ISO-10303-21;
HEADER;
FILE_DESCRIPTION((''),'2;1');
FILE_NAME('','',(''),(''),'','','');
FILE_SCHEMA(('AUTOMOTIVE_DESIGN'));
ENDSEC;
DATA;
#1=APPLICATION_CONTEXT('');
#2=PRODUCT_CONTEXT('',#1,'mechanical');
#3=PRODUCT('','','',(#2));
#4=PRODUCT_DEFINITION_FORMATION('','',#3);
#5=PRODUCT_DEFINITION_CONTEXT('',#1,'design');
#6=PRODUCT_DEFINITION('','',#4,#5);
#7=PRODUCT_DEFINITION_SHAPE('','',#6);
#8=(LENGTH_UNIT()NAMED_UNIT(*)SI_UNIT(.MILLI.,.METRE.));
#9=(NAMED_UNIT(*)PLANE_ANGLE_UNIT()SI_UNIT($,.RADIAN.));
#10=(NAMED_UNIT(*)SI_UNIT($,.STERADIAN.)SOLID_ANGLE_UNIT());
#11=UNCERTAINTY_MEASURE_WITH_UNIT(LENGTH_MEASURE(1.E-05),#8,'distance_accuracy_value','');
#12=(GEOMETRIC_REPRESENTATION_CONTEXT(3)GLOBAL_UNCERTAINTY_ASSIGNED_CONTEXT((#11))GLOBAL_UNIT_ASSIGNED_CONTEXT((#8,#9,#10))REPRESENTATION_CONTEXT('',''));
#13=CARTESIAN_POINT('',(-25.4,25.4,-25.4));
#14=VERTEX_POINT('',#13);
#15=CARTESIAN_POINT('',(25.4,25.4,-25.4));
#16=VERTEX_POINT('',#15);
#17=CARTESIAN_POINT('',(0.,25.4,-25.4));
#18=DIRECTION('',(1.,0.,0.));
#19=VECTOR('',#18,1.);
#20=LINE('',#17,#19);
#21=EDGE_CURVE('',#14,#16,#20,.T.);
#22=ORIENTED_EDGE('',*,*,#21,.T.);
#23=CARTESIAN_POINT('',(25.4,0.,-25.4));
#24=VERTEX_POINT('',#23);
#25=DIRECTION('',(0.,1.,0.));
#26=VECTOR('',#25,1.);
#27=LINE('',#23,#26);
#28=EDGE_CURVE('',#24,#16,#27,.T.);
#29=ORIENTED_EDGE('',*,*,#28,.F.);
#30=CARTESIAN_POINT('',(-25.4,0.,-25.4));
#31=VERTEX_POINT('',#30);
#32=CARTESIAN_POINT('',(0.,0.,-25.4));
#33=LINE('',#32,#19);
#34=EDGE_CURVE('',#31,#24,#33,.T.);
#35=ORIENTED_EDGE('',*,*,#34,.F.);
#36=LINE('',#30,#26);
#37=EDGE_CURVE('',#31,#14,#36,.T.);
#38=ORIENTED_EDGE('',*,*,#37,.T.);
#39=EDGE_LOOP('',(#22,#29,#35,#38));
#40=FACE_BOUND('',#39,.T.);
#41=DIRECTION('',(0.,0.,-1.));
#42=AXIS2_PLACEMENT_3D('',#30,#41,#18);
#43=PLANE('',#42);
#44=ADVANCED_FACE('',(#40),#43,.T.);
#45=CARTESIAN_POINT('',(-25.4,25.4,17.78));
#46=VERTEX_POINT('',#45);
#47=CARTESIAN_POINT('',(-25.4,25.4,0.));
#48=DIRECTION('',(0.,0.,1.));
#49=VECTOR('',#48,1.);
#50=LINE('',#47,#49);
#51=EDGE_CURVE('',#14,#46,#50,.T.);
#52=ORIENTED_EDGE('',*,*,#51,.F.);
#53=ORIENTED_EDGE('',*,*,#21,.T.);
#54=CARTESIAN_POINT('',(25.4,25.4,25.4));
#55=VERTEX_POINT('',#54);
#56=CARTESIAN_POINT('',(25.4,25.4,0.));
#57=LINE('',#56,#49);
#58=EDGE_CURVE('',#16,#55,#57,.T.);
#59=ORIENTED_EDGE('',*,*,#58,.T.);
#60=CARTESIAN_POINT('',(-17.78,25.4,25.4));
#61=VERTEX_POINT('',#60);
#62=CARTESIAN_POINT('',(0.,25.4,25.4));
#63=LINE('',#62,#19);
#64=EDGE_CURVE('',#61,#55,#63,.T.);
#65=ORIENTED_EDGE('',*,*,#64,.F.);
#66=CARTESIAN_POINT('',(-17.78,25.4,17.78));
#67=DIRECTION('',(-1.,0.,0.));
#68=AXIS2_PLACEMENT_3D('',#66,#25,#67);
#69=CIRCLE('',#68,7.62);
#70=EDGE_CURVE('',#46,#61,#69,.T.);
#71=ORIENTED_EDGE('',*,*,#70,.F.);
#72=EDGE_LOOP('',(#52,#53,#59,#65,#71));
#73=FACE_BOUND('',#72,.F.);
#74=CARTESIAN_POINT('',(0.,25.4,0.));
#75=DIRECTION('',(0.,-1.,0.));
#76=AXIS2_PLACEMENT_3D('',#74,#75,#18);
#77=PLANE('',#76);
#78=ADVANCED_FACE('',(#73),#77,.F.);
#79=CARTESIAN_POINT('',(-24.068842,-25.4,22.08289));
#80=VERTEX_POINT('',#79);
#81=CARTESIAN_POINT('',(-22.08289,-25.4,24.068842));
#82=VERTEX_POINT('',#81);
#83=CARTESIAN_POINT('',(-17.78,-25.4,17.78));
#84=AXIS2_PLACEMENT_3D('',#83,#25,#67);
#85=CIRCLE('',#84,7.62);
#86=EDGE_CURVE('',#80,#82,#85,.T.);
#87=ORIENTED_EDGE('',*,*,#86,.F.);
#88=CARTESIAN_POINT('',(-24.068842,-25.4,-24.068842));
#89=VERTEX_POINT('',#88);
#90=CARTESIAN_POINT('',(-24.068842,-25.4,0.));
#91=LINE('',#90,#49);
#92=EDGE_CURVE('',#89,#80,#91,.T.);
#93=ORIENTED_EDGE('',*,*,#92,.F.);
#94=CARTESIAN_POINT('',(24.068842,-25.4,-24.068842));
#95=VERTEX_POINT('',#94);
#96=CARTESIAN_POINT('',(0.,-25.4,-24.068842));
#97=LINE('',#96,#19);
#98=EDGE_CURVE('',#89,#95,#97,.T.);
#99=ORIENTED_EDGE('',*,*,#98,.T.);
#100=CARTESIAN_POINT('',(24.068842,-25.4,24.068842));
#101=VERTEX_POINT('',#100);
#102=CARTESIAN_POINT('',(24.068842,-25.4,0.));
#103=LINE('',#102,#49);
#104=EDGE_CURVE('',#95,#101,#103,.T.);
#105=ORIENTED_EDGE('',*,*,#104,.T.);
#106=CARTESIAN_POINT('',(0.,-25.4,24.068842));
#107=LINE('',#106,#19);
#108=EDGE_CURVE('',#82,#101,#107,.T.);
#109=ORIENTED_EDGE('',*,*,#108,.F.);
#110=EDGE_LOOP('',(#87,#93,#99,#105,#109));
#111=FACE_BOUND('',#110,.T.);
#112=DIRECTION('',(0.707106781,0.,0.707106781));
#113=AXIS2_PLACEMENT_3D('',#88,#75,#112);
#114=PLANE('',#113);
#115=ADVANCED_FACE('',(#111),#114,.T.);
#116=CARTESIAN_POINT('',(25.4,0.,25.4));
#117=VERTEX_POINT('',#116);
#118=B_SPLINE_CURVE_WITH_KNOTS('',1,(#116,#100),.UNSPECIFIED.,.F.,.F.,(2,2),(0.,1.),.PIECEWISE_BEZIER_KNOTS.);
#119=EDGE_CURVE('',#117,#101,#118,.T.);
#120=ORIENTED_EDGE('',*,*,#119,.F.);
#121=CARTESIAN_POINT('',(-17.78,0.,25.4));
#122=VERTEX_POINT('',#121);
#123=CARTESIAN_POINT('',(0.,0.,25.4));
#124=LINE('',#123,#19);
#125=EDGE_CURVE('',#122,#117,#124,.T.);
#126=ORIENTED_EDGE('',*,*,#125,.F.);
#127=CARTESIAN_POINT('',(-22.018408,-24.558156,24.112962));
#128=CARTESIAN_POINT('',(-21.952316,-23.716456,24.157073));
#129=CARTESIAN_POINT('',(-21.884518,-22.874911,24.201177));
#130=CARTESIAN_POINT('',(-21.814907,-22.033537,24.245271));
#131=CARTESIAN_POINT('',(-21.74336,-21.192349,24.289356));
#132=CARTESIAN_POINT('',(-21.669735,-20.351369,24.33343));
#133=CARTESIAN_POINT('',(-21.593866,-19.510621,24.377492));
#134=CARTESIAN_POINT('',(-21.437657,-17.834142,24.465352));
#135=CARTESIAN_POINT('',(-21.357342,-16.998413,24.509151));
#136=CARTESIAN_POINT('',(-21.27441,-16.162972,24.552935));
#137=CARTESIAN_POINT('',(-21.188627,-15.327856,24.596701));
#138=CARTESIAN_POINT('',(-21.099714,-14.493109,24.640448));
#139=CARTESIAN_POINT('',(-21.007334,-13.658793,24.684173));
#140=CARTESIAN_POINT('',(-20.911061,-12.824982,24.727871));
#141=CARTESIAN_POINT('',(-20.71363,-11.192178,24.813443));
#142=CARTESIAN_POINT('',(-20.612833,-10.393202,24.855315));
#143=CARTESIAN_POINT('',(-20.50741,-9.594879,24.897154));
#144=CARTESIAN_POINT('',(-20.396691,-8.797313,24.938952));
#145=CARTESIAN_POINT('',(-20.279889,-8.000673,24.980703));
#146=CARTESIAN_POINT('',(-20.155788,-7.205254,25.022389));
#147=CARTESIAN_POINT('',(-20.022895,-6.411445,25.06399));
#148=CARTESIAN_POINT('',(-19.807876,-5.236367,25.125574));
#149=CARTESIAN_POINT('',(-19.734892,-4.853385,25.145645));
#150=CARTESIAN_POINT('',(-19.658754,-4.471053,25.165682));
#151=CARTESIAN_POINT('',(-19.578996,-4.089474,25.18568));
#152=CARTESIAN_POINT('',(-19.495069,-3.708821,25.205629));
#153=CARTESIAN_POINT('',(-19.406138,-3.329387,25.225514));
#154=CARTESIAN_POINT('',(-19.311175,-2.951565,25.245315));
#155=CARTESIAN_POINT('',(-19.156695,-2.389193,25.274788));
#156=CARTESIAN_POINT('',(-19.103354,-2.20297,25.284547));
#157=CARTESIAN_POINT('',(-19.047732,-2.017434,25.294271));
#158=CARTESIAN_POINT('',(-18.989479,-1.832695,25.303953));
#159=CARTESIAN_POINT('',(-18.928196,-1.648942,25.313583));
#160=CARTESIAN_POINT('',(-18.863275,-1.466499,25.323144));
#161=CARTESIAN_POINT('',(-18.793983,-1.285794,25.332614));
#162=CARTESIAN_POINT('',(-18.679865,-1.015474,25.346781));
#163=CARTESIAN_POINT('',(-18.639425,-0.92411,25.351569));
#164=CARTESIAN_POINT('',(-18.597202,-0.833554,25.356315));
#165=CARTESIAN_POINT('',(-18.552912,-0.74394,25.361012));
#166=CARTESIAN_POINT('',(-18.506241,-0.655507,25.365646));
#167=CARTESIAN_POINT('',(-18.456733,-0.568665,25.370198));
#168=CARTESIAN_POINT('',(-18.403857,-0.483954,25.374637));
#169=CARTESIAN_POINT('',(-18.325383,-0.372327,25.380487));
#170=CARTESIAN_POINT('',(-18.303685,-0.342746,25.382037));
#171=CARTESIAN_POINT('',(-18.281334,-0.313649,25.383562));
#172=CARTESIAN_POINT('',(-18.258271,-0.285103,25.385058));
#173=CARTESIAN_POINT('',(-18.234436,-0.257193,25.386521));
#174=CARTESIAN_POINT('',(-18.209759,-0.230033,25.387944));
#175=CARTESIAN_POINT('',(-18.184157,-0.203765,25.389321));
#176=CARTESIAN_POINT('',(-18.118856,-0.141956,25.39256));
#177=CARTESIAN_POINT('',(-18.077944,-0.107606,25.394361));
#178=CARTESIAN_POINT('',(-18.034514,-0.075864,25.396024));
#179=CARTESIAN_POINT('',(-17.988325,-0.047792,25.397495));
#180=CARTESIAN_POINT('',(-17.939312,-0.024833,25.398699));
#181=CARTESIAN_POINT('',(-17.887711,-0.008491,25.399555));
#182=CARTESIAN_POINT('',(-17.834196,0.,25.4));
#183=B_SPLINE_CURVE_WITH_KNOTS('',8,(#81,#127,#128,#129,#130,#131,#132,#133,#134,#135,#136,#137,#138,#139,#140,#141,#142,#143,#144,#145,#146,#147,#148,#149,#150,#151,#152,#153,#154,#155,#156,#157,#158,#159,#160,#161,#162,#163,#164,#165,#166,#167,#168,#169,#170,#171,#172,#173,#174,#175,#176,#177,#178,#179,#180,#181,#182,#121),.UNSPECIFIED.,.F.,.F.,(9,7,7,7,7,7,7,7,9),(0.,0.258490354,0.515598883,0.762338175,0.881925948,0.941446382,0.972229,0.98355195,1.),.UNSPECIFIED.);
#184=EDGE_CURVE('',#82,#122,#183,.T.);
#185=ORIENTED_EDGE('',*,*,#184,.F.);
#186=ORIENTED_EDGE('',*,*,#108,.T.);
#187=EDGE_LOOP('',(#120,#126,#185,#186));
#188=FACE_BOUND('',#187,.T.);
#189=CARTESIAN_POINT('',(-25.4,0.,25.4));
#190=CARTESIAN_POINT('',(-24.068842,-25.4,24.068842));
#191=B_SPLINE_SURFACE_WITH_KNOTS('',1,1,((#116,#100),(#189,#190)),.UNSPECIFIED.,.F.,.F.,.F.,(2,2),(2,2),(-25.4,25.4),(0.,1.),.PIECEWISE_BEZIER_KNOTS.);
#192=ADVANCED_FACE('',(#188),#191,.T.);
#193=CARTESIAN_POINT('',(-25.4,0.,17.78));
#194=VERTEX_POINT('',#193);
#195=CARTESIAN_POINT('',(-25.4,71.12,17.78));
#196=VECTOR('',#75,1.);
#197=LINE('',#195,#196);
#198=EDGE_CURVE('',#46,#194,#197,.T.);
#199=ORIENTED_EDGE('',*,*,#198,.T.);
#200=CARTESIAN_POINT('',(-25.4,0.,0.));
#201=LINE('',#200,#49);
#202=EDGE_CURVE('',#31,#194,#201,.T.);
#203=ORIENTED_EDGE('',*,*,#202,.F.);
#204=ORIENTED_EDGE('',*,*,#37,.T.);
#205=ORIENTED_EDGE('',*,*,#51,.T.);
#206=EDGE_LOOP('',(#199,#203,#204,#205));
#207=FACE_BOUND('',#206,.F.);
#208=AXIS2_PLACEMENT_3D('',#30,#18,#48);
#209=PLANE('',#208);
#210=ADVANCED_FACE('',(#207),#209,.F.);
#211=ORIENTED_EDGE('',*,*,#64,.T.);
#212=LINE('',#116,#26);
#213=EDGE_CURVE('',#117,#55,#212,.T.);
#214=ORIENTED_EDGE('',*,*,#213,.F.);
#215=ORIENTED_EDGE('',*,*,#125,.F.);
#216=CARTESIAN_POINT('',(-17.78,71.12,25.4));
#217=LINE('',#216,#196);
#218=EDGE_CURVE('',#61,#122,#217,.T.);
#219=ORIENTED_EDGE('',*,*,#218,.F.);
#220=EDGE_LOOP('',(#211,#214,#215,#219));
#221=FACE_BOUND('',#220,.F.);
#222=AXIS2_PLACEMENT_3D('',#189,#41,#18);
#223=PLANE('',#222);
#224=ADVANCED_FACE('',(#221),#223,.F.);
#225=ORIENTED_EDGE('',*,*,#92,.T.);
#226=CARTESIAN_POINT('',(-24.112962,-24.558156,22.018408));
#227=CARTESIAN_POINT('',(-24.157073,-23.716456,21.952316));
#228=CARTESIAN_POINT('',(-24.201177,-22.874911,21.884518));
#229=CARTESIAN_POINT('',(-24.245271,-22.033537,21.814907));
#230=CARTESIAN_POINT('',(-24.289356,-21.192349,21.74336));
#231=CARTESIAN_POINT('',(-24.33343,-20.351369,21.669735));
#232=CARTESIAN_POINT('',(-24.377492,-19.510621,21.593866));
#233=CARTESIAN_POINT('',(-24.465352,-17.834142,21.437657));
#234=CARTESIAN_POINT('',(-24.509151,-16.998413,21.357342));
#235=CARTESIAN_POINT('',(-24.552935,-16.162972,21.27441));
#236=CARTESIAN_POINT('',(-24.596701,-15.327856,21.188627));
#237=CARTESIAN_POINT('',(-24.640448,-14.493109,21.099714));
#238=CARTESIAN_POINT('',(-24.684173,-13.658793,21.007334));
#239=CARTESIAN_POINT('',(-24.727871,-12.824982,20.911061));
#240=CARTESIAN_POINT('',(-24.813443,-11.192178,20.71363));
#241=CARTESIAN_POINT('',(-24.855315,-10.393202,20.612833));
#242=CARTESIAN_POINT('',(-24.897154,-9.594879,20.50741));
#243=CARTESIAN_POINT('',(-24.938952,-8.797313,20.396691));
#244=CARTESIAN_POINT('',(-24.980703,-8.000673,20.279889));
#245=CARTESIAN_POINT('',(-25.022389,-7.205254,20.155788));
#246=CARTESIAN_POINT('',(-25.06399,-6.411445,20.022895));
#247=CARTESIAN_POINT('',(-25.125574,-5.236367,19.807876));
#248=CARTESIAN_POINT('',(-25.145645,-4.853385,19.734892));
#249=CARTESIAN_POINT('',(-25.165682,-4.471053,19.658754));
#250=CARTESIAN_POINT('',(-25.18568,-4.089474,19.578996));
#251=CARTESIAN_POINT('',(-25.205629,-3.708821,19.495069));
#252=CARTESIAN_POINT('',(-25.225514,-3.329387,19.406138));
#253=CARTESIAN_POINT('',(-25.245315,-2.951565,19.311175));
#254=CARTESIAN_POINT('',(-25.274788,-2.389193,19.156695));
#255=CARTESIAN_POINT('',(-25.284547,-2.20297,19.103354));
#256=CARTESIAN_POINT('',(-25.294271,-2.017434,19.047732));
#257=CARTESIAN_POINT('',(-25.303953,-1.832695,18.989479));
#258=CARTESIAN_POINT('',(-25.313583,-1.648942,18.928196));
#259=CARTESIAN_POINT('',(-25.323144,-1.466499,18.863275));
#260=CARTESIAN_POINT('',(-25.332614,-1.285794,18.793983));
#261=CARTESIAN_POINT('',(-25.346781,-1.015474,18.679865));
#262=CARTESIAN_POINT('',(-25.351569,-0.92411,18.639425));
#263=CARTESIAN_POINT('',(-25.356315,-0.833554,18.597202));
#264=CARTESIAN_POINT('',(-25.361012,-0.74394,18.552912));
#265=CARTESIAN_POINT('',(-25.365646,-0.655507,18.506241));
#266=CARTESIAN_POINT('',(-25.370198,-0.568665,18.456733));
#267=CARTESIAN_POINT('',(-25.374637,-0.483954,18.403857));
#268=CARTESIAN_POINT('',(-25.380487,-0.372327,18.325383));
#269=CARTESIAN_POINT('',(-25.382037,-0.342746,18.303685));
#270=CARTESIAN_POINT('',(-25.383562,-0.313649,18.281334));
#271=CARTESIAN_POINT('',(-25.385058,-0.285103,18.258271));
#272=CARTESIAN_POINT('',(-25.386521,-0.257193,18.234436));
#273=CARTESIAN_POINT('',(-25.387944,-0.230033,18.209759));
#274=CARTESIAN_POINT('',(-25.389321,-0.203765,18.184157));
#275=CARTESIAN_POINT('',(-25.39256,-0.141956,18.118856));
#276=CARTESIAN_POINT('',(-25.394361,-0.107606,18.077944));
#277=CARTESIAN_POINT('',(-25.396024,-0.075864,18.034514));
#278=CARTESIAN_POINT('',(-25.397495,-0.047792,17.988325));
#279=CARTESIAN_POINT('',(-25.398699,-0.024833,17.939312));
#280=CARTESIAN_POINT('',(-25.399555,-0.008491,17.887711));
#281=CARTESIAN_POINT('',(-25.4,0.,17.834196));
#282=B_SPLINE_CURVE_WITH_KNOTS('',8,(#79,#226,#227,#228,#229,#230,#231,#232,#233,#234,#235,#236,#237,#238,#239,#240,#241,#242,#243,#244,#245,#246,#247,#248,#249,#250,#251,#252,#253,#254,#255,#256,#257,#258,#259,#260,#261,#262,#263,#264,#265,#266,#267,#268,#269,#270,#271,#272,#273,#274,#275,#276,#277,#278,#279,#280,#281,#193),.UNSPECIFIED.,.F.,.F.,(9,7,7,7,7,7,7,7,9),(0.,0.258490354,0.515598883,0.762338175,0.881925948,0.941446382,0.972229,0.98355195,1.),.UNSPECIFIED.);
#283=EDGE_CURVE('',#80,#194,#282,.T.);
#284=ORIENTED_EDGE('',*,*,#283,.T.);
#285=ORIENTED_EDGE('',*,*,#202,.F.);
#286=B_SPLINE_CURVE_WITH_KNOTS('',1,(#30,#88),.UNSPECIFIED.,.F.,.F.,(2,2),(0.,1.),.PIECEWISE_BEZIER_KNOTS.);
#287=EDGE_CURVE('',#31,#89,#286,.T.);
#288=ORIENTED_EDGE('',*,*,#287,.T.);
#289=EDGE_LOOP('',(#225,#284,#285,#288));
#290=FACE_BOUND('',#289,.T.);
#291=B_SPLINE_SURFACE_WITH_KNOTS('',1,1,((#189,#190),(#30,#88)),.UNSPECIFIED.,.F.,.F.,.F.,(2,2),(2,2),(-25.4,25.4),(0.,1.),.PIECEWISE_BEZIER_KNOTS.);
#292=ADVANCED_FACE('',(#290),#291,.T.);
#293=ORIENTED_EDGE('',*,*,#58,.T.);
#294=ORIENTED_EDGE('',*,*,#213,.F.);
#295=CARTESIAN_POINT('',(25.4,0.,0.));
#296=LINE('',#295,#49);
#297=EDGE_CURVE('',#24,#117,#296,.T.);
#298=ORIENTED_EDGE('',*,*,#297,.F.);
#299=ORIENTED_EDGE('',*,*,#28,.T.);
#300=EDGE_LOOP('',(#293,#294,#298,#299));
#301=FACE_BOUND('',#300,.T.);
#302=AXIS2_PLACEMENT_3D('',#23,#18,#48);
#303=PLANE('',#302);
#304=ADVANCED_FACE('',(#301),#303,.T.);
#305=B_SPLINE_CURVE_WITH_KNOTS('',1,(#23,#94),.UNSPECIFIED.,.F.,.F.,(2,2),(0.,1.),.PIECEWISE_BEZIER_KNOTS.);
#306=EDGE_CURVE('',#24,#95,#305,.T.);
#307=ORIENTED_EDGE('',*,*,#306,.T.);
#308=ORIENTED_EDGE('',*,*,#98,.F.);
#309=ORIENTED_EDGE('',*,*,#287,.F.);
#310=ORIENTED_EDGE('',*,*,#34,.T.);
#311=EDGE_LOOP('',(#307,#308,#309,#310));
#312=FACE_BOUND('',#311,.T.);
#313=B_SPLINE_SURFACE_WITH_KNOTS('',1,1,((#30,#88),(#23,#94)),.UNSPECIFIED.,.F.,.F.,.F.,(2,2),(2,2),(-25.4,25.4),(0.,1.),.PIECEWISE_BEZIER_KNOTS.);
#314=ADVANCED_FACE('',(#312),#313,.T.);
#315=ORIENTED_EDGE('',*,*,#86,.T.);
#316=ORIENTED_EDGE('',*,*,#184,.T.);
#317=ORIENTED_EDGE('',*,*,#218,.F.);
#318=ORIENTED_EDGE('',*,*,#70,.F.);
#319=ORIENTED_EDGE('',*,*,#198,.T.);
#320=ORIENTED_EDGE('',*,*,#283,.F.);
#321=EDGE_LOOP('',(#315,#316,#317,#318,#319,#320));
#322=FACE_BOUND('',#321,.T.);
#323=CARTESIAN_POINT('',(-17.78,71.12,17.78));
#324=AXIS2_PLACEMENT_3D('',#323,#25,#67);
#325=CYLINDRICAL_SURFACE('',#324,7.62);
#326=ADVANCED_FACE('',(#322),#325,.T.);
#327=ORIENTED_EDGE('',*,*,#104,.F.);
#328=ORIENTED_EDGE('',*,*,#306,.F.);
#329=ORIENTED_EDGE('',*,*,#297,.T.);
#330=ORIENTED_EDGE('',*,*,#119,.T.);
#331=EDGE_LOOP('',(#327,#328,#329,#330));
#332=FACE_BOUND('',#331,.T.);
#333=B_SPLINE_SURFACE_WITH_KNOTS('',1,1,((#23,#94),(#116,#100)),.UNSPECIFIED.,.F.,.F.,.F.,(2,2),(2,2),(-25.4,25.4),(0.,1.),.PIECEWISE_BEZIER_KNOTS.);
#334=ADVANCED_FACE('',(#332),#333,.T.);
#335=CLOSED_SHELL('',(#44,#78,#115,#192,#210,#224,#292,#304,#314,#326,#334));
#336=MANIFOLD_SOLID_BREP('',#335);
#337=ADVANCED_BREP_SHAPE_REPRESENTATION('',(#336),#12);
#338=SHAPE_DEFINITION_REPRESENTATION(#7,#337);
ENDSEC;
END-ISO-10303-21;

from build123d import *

# Parameters (mm, degrees)
F0_W          = 50.8
F0_H          = 50.8
F1_DEPTH      = 25.4
F1_TAPER      = 3
F1_DEPTH_BACK = 25.4
F2_T1_DEPTH   = 116.84


# Not quite as in the source:
# - a fillet or chamfer that OpenCascade refuses, or shapes differently, is made with other operations: its cross-section is extruded or revolved along the edge and cut away or added


with BuildPart() as f1:
    # F0 (on Front) → F1 (new body, two sides)
    with BuildSketch(Plane.XZ) as f1_sk:
        Rectangle(F0_W, F0_H)
    extrude(amount=F1_DEPTH, taper=F1_TAPER)
    extrude(f1_sk.sketch, amount=-F1_DEPTH_BACK)

    # F2: fillet of radius 7.62 on 1 edges, made by hand

    # F2_s2 → F2_t1 (cut)
    with BuildSketch(Plane.XZ.offset(-71.12)):
        with BuildLine():
            ThreePointArc((-25.4, 17.78), (-23.1681536726, 23.1681536726), (-17.78, 25.4))
            Line((-17.78, 25.4), (-17.78, 25.5524))
            Line((-17.78, 25.5524), (-25.5524, 25.5524))
            Line((-25.5524, 25.5524), (-25.5524, 17.78))
            Line((-25.5524, 17.78), (-25.4, 17.78))
        make_face()
    extrude(amount=F2_T1_DEPTH, mode=Mode.SUBTRACT)


solid = f1.part
